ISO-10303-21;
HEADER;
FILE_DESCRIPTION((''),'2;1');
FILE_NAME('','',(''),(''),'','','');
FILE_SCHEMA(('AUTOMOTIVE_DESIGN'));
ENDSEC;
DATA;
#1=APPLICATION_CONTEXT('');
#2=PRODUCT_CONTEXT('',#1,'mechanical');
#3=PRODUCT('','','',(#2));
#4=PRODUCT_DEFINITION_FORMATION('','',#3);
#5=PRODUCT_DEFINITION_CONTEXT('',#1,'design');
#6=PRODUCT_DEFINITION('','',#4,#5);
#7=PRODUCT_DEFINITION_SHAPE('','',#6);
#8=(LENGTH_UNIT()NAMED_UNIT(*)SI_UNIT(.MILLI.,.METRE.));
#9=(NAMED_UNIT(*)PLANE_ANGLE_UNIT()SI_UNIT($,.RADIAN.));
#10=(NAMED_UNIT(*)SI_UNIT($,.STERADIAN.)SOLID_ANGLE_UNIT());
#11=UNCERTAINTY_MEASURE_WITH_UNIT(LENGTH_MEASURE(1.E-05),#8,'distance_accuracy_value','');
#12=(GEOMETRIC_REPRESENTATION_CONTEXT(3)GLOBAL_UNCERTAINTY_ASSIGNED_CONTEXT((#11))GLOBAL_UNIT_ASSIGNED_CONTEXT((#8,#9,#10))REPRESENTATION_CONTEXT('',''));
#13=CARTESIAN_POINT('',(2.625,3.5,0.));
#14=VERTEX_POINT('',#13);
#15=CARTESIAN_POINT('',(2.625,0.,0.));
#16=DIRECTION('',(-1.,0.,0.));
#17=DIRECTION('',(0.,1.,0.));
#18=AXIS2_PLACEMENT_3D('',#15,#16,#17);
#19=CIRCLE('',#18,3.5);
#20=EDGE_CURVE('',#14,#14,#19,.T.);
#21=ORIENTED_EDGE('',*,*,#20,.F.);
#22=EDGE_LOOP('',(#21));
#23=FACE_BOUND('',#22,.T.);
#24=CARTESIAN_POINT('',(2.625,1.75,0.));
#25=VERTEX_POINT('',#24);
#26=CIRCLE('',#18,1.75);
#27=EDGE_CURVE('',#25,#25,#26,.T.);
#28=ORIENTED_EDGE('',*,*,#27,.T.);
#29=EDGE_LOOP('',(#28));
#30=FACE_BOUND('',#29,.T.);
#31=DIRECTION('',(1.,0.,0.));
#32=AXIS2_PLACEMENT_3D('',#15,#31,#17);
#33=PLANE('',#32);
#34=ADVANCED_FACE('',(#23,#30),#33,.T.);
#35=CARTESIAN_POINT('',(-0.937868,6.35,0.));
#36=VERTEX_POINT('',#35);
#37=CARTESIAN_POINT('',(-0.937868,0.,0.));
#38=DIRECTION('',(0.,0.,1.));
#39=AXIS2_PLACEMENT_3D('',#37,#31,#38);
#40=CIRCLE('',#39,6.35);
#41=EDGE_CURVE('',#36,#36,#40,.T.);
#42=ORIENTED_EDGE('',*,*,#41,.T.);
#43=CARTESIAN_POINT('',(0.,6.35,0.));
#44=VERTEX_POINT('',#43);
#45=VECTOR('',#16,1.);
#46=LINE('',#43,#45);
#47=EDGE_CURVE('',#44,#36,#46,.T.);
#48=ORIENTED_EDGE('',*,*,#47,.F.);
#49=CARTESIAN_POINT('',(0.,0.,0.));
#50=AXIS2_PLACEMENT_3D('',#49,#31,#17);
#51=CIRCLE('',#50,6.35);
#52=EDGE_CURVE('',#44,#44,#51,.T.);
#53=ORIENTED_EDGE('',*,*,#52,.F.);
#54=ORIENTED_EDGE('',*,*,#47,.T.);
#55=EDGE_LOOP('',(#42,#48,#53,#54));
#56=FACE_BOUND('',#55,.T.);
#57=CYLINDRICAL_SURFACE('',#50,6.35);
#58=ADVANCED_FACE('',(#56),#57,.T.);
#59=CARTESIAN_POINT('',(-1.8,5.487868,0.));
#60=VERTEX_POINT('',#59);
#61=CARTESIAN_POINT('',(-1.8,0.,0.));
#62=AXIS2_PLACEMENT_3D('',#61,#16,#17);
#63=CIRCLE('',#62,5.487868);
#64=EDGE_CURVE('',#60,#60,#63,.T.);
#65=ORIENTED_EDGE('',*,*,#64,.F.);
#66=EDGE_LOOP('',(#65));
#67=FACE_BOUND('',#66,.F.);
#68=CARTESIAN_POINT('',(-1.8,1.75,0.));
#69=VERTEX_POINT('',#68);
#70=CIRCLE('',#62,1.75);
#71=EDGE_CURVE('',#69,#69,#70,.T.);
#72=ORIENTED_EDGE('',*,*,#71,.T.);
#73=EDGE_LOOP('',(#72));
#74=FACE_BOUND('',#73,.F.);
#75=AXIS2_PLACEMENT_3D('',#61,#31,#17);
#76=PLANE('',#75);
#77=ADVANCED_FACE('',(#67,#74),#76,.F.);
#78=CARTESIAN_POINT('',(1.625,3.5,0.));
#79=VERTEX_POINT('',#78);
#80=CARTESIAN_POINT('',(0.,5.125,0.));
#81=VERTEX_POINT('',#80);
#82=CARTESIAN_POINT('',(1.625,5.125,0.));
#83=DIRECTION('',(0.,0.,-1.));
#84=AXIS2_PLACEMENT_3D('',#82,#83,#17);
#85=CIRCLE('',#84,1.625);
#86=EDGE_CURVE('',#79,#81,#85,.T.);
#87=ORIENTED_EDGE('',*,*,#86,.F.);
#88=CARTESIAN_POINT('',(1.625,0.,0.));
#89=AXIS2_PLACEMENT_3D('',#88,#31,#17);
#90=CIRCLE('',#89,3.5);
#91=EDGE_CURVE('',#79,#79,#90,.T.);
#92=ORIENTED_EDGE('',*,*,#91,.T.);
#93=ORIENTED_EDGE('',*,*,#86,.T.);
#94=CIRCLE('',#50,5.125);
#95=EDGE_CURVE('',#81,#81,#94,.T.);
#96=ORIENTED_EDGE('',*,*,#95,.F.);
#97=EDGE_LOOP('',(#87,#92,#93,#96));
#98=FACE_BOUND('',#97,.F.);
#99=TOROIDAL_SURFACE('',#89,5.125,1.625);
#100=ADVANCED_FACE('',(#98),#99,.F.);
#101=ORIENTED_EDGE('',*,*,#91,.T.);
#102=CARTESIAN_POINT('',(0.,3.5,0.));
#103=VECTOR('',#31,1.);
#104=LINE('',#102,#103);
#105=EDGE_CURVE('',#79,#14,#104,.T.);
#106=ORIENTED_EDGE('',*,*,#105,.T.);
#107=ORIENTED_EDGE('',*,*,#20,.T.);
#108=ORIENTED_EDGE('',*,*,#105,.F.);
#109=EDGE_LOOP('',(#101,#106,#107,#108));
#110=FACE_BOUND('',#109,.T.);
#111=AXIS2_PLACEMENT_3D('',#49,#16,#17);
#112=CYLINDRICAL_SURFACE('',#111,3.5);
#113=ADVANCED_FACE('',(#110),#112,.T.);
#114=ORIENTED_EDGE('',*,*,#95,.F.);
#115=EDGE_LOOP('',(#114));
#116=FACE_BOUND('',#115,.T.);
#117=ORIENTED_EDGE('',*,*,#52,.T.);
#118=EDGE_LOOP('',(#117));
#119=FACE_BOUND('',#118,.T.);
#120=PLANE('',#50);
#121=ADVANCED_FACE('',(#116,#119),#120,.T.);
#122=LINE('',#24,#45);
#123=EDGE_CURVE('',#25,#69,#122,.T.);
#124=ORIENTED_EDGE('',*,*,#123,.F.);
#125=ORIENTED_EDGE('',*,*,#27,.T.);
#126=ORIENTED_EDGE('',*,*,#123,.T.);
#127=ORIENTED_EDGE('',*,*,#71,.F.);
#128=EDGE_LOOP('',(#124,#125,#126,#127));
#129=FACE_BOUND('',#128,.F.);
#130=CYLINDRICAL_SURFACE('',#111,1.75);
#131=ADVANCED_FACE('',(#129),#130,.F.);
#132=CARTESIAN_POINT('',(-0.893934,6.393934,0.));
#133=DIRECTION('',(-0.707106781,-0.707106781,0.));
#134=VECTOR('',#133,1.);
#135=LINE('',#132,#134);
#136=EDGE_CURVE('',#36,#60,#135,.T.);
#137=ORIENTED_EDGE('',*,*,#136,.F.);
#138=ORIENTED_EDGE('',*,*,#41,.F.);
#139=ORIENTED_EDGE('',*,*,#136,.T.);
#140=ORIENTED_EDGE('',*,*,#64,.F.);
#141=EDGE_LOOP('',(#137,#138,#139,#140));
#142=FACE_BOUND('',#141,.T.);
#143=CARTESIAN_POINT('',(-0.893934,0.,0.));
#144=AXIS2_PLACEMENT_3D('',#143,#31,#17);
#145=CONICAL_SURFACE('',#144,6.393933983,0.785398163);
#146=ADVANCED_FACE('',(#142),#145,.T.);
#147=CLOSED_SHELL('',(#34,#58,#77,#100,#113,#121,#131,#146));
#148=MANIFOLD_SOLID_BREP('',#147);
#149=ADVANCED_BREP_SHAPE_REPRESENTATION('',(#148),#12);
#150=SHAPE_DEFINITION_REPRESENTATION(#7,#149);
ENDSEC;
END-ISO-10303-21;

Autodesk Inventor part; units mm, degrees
ref_plane "YZ Plane" through (0, 0, 0) normal (1, 0, 0) x (0, 1, 0)
ref_plane "XZ Plane" through (0, 0, 0) normal (0, 1, 0) x (-1, 0, 0)
ref_plane "XY Plane" through (0, 0, 0) normal (0, 0, 1) x (1, 0, 0)
sketch "스케치1" plane through (0, 0, 0) normal (1, 0, 0) x (0, 1, 0)
  circle A0 centre (0, 0) radius 6.5
  circle A1 centre (0, 0) radius 1.75
  circle A2 centre (0, 0) radius 3.5
  dimension "d0" = 13
  dimension "d1" = 3.5
  dimension "d2" = 7
extrude "돌출1" add sketch "스케치1" against normal blind 2 contours A0 | A2
extrude "돌출2" add sketch "스케치1" along normal blind 2.625 contours A2
fillet "모깎기1" radius 1.625 1 edges at (0, -3.5, 0)
chamfer "모따기1" distance 1 angle 45 1 edges at (-2, -6.5, 0)
move faces "이동1" translate (0.2, 0, 0) faces at (-2, 4.1798, -0.5783)
offset faces "크기2" outward -0.15 faces at (-0.3333, 6.4789, -0.523) (-1.2667, -2.6722, -5.6315)
properties part number "축종아리베어링고정_3D 인쇄"
